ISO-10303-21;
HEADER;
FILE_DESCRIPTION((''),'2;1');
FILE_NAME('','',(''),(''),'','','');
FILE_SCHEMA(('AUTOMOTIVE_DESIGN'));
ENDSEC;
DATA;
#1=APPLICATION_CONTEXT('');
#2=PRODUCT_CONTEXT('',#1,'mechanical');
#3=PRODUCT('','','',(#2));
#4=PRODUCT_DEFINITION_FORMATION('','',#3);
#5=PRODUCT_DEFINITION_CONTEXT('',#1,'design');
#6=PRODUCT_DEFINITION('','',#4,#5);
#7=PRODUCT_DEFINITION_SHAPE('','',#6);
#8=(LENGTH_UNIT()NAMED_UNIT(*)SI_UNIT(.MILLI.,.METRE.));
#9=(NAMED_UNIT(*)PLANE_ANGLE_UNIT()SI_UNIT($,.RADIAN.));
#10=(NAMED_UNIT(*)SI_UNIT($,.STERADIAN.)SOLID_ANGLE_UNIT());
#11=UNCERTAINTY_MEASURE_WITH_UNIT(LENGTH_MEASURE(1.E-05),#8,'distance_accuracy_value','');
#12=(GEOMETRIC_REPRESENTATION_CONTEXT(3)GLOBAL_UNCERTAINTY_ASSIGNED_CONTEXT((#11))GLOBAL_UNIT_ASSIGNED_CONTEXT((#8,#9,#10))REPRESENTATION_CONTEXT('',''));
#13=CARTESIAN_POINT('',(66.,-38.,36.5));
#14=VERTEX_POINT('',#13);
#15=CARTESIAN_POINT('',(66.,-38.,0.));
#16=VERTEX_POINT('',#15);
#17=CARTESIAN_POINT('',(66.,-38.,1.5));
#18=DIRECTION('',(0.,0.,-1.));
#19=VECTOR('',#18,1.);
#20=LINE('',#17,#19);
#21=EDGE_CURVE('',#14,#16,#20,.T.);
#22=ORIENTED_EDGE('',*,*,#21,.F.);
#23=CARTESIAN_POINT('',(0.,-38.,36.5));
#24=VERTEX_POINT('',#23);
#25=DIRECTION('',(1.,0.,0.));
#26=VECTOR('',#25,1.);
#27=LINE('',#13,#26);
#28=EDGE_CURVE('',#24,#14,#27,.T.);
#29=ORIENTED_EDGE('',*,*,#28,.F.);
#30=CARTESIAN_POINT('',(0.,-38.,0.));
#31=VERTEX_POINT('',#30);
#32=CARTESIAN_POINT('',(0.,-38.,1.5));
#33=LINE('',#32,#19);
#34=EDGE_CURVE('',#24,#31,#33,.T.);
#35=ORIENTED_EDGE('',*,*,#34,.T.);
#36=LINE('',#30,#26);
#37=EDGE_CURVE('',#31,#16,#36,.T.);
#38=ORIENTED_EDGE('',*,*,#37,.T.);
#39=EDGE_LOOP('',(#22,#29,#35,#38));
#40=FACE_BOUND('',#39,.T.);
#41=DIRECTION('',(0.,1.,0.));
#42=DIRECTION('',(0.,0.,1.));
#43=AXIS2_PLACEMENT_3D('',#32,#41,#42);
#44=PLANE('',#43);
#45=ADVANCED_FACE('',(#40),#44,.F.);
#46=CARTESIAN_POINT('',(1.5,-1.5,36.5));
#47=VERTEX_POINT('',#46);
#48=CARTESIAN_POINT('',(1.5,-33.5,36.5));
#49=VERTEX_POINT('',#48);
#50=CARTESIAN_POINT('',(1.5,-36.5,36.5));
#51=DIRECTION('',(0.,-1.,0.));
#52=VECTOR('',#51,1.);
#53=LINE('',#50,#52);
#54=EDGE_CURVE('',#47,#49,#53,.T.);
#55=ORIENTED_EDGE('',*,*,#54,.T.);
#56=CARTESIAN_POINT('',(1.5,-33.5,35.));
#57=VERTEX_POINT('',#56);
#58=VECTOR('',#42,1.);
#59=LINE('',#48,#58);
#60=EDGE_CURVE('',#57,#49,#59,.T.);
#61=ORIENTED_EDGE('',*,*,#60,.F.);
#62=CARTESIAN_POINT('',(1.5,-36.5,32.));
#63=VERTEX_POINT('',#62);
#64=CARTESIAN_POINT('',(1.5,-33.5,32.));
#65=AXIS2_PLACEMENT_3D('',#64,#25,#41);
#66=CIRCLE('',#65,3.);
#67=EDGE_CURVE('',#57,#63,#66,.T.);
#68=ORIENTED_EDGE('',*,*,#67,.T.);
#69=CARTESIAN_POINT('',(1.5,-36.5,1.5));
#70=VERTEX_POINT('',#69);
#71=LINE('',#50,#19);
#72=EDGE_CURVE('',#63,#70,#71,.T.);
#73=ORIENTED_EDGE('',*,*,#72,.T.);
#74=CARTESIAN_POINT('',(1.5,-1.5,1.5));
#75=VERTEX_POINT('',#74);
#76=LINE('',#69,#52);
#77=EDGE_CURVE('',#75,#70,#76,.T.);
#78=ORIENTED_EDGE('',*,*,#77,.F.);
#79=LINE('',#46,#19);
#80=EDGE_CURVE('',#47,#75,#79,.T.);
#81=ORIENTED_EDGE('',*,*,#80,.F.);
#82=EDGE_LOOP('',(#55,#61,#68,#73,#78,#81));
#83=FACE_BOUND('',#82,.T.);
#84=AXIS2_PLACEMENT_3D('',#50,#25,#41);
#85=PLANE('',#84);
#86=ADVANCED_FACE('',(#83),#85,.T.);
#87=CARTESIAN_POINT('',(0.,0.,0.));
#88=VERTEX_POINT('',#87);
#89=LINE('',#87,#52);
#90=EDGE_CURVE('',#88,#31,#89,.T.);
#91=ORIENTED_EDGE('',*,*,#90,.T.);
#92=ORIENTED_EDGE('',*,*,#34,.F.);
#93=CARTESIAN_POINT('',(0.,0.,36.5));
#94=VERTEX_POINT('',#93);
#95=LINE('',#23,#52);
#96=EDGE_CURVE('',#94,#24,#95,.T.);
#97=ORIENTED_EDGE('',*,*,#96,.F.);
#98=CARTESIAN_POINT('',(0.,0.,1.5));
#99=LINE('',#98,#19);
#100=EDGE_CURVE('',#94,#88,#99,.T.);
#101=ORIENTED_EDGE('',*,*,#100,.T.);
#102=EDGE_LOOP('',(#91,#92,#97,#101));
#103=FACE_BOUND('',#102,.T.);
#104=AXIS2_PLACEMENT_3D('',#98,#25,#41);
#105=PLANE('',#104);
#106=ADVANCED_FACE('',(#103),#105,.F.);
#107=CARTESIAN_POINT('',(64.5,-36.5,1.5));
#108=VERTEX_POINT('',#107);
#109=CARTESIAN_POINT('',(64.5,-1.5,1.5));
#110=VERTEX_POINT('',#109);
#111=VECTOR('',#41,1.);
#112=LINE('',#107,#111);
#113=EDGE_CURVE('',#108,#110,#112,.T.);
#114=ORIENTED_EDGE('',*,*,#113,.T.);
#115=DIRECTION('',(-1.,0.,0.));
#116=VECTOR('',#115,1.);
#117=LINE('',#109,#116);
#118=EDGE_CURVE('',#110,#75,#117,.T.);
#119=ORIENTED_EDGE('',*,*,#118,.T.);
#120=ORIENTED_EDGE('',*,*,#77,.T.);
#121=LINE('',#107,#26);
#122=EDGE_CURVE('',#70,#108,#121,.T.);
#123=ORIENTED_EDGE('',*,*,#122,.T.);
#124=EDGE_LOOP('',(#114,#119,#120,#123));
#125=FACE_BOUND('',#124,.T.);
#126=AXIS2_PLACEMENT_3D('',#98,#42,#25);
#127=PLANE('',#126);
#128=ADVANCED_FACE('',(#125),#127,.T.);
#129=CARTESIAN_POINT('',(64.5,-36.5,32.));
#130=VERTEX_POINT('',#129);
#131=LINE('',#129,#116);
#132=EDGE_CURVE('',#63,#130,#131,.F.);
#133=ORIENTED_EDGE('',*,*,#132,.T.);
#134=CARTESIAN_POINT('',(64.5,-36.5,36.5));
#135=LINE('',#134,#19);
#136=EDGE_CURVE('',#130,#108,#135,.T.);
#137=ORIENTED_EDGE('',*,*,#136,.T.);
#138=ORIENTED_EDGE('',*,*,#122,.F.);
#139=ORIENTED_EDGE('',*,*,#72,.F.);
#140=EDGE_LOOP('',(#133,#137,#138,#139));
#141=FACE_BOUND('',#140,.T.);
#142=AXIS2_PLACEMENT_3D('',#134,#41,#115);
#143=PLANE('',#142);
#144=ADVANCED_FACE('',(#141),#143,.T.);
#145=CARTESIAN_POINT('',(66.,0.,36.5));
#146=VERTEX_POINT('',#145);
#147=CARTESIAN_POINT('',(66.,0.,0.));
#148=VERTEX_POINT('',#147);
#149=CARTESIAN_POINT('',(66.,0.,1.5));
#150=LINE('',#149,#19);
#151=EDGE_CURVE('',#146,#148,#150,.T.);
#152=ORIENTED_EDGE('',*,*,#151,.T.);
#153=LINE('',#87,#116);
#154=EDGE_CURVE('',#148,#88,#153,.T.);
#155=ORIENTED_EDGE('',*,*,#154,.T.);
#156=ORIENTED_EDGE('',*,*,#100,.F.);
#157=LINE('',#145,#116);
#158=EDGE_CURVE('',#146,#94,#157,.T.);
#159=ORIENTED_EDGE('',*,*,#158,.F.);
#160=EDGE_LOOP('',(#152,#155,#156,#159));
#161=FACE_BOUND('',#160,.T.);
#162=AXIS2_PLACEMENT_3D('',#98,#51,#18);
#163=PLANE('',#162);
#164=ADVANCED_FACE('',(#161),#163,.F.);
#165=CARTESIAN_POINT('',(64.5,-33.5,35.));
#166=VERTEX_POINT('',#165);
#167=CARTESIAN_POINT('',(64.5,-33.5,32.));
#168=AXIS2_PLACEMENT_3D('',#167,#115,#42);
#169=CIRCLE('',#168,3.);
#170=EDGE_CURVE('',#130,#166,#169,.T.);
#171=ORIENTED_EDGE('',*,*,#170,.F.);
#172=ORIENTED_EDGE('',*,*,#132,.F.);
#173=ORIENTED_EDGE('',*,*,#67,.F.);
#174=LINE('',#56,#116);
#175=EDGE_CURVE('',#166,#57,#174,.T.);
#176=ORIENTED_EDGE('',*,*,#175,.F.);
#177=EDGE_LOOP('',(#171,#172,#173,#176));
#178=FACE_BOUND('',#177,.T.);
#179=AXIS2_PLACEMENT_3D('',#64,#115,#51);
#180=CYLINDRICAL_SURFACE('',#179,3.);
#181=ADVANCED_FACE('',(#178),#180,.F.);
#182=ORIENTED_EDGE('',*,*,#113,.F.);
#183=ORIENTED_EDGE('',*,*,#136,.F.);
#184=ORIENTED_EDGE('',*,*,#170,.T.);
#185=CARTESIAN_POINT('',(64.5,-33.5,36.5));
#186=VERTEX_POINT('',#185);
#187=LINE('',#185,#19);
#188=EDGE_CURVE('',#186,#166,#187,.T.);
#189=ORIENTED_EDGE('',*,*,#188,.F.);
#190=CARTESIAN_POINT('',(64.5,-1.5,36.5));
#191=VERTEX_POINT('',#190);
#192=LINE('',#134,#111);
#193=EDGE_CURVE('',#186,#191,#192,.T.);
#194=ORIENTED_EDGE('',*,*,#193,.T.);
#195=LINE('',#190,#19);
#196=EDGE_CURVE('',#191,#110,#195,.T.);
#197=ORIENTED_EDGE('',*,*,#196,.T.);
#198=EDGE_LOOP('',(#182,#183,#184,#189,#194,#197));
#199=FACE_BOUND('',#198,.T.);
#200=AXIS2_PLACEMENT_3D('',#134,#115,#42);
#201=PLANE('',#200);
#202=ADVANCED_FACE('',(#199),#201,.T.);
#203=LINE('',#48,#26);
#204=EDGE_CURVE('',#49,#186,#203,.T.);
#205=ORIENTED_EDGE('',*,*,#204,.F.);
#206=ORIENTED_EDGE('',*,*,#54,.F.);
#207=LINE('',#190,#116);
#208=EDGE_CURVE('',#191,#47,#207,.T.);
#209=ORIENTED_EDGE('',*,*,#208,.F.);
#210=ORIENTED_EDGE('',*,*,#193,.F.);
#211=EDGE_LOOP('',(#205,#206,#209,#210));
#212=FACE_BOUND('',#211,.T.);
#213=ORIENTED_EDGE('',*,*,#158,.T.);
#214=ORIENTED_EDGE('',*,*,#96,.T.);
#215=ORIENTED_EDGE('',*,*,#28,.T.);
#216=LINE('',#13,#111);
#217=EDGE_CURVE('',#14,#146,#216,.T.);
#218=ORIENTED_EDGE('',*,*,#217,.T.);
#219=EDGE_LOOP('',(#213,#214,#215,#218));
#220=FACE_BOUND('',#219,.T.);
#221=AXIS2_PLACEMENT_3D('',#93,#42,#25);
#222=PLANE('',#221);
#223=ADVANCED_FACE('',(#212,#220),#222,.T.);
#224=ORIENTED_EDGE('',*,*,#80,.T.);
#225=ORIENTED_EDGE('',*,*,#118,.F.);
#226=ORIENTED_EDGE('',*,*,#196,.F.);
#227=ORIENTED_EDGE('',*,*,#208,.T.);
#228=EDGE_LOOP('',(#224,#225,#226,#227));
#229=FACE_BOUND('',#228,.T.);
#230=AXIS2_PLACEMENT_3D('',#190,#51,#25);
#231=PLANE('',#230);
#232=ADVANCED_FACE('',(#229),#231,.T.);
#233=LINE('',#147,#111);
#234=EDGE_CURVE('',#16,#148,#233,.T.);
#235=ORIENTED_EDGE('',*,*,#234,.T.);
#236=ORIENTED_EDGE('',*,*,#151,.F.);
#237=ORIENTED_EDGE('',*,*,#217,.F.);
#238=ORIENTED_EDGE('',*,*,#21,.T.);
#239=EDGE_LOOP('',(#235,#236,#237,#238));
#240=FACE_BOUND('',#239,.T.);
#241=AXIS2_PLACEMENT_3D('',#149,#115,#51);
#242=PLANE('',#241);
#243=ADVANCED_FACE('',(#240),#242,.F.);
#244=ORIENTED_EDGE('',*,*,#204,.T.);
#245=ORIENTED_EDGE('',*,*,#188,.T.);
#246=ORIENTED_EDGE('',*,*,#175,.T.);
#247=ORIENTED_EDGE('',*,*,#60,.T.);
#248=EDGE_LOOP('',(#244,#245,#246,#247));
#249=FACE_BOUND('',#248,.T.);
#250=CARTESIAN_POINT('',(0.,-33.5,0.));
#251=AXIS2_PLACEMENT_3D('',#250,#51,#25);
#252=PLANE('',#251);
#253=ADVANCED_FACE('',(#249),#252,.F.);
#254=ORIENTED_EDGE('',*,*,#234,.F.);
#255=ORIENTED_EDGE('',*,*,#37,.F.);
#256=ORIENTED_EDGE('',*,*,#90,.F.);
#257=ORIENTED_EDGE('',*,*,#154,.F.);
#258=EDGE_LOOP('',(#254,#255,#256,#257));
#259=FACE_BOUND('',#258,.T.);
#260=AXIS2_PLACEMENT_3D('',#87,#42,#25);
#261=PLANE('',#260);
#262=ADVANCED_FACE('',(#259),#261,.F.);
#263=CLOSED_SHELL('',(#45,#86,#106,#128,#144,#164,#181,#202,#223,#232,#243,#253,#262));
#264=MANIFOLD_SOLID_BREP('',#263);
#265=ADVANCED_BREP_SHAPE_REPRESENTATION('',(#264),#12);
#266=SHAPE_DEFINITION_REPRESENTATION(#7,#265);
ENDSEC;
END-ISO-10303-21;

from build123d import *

# Parameters (mm, degrees)
SKETCH_1_W      = 66
SKETCH_1_H      = 38
EXTRUDE_1_DEPTH = 1.5
SKETCH_2_W      = 66
SKETCH_2_H      = 38
SKETCH_2_W_2    = 63
SKETCH_2_H_2    = 35
EXTRUDE_2_DEPTH = 35
SKETCH_3_W      = 63
SKETCH_3_H      = 1.5
EXTRUDE_3_DEPTH = 3
FILLET_1_R      = 3


with BuildPart() as part:
    # 草图1 → 凸台-拉伸1 (new body)
    with BuildSketch(Plane.XY):
        with Locations((33, -19)):
            Rectangle(SKETCH_1_W, SKETCH_1_H)
    extrude(amount=EXTRUDE_1_DEPTH)

    # 草图2 → 凸台-拉伸2 (add)
    with BuildSketch(Plane.XY.offset(1.5)):
        with Locations((33, -19)):
            Rectangle(SKETCH_2_W, SKETCH_2_H)
        with Locations((33, -19)):
            Rectangle(SKETCH_2_W_2, SKETCH_2_H_2, mode=Mode.SUBTRACT)
    extrude(amount=EXTRUDE_2_DEPTH)

    # 草图3 → 凸台-拉伸3 (add)
    with BuildSketch(Plane(origin=(0, -36.5, 0), x_dir=(1, 0, 0), z_dir=(0, 1, 0))):
        with Locations((33, -35.75)):
            Rectangle(SKETCH_3_W, SKETCH_3_H)
    extrude(amount=EXTRUDE_3_DEPTH)

    # 圆角1
    fillet_1_edges = [part.edges().sort_by_distance(p)[0] for p in [
        (33, -36.5, 35),
    ]]
    fillet(fillet_1_edges, radius=FILLET_1_R - 0.0001)  # a hair under: the kernel refuses the full size


solid = part.part
